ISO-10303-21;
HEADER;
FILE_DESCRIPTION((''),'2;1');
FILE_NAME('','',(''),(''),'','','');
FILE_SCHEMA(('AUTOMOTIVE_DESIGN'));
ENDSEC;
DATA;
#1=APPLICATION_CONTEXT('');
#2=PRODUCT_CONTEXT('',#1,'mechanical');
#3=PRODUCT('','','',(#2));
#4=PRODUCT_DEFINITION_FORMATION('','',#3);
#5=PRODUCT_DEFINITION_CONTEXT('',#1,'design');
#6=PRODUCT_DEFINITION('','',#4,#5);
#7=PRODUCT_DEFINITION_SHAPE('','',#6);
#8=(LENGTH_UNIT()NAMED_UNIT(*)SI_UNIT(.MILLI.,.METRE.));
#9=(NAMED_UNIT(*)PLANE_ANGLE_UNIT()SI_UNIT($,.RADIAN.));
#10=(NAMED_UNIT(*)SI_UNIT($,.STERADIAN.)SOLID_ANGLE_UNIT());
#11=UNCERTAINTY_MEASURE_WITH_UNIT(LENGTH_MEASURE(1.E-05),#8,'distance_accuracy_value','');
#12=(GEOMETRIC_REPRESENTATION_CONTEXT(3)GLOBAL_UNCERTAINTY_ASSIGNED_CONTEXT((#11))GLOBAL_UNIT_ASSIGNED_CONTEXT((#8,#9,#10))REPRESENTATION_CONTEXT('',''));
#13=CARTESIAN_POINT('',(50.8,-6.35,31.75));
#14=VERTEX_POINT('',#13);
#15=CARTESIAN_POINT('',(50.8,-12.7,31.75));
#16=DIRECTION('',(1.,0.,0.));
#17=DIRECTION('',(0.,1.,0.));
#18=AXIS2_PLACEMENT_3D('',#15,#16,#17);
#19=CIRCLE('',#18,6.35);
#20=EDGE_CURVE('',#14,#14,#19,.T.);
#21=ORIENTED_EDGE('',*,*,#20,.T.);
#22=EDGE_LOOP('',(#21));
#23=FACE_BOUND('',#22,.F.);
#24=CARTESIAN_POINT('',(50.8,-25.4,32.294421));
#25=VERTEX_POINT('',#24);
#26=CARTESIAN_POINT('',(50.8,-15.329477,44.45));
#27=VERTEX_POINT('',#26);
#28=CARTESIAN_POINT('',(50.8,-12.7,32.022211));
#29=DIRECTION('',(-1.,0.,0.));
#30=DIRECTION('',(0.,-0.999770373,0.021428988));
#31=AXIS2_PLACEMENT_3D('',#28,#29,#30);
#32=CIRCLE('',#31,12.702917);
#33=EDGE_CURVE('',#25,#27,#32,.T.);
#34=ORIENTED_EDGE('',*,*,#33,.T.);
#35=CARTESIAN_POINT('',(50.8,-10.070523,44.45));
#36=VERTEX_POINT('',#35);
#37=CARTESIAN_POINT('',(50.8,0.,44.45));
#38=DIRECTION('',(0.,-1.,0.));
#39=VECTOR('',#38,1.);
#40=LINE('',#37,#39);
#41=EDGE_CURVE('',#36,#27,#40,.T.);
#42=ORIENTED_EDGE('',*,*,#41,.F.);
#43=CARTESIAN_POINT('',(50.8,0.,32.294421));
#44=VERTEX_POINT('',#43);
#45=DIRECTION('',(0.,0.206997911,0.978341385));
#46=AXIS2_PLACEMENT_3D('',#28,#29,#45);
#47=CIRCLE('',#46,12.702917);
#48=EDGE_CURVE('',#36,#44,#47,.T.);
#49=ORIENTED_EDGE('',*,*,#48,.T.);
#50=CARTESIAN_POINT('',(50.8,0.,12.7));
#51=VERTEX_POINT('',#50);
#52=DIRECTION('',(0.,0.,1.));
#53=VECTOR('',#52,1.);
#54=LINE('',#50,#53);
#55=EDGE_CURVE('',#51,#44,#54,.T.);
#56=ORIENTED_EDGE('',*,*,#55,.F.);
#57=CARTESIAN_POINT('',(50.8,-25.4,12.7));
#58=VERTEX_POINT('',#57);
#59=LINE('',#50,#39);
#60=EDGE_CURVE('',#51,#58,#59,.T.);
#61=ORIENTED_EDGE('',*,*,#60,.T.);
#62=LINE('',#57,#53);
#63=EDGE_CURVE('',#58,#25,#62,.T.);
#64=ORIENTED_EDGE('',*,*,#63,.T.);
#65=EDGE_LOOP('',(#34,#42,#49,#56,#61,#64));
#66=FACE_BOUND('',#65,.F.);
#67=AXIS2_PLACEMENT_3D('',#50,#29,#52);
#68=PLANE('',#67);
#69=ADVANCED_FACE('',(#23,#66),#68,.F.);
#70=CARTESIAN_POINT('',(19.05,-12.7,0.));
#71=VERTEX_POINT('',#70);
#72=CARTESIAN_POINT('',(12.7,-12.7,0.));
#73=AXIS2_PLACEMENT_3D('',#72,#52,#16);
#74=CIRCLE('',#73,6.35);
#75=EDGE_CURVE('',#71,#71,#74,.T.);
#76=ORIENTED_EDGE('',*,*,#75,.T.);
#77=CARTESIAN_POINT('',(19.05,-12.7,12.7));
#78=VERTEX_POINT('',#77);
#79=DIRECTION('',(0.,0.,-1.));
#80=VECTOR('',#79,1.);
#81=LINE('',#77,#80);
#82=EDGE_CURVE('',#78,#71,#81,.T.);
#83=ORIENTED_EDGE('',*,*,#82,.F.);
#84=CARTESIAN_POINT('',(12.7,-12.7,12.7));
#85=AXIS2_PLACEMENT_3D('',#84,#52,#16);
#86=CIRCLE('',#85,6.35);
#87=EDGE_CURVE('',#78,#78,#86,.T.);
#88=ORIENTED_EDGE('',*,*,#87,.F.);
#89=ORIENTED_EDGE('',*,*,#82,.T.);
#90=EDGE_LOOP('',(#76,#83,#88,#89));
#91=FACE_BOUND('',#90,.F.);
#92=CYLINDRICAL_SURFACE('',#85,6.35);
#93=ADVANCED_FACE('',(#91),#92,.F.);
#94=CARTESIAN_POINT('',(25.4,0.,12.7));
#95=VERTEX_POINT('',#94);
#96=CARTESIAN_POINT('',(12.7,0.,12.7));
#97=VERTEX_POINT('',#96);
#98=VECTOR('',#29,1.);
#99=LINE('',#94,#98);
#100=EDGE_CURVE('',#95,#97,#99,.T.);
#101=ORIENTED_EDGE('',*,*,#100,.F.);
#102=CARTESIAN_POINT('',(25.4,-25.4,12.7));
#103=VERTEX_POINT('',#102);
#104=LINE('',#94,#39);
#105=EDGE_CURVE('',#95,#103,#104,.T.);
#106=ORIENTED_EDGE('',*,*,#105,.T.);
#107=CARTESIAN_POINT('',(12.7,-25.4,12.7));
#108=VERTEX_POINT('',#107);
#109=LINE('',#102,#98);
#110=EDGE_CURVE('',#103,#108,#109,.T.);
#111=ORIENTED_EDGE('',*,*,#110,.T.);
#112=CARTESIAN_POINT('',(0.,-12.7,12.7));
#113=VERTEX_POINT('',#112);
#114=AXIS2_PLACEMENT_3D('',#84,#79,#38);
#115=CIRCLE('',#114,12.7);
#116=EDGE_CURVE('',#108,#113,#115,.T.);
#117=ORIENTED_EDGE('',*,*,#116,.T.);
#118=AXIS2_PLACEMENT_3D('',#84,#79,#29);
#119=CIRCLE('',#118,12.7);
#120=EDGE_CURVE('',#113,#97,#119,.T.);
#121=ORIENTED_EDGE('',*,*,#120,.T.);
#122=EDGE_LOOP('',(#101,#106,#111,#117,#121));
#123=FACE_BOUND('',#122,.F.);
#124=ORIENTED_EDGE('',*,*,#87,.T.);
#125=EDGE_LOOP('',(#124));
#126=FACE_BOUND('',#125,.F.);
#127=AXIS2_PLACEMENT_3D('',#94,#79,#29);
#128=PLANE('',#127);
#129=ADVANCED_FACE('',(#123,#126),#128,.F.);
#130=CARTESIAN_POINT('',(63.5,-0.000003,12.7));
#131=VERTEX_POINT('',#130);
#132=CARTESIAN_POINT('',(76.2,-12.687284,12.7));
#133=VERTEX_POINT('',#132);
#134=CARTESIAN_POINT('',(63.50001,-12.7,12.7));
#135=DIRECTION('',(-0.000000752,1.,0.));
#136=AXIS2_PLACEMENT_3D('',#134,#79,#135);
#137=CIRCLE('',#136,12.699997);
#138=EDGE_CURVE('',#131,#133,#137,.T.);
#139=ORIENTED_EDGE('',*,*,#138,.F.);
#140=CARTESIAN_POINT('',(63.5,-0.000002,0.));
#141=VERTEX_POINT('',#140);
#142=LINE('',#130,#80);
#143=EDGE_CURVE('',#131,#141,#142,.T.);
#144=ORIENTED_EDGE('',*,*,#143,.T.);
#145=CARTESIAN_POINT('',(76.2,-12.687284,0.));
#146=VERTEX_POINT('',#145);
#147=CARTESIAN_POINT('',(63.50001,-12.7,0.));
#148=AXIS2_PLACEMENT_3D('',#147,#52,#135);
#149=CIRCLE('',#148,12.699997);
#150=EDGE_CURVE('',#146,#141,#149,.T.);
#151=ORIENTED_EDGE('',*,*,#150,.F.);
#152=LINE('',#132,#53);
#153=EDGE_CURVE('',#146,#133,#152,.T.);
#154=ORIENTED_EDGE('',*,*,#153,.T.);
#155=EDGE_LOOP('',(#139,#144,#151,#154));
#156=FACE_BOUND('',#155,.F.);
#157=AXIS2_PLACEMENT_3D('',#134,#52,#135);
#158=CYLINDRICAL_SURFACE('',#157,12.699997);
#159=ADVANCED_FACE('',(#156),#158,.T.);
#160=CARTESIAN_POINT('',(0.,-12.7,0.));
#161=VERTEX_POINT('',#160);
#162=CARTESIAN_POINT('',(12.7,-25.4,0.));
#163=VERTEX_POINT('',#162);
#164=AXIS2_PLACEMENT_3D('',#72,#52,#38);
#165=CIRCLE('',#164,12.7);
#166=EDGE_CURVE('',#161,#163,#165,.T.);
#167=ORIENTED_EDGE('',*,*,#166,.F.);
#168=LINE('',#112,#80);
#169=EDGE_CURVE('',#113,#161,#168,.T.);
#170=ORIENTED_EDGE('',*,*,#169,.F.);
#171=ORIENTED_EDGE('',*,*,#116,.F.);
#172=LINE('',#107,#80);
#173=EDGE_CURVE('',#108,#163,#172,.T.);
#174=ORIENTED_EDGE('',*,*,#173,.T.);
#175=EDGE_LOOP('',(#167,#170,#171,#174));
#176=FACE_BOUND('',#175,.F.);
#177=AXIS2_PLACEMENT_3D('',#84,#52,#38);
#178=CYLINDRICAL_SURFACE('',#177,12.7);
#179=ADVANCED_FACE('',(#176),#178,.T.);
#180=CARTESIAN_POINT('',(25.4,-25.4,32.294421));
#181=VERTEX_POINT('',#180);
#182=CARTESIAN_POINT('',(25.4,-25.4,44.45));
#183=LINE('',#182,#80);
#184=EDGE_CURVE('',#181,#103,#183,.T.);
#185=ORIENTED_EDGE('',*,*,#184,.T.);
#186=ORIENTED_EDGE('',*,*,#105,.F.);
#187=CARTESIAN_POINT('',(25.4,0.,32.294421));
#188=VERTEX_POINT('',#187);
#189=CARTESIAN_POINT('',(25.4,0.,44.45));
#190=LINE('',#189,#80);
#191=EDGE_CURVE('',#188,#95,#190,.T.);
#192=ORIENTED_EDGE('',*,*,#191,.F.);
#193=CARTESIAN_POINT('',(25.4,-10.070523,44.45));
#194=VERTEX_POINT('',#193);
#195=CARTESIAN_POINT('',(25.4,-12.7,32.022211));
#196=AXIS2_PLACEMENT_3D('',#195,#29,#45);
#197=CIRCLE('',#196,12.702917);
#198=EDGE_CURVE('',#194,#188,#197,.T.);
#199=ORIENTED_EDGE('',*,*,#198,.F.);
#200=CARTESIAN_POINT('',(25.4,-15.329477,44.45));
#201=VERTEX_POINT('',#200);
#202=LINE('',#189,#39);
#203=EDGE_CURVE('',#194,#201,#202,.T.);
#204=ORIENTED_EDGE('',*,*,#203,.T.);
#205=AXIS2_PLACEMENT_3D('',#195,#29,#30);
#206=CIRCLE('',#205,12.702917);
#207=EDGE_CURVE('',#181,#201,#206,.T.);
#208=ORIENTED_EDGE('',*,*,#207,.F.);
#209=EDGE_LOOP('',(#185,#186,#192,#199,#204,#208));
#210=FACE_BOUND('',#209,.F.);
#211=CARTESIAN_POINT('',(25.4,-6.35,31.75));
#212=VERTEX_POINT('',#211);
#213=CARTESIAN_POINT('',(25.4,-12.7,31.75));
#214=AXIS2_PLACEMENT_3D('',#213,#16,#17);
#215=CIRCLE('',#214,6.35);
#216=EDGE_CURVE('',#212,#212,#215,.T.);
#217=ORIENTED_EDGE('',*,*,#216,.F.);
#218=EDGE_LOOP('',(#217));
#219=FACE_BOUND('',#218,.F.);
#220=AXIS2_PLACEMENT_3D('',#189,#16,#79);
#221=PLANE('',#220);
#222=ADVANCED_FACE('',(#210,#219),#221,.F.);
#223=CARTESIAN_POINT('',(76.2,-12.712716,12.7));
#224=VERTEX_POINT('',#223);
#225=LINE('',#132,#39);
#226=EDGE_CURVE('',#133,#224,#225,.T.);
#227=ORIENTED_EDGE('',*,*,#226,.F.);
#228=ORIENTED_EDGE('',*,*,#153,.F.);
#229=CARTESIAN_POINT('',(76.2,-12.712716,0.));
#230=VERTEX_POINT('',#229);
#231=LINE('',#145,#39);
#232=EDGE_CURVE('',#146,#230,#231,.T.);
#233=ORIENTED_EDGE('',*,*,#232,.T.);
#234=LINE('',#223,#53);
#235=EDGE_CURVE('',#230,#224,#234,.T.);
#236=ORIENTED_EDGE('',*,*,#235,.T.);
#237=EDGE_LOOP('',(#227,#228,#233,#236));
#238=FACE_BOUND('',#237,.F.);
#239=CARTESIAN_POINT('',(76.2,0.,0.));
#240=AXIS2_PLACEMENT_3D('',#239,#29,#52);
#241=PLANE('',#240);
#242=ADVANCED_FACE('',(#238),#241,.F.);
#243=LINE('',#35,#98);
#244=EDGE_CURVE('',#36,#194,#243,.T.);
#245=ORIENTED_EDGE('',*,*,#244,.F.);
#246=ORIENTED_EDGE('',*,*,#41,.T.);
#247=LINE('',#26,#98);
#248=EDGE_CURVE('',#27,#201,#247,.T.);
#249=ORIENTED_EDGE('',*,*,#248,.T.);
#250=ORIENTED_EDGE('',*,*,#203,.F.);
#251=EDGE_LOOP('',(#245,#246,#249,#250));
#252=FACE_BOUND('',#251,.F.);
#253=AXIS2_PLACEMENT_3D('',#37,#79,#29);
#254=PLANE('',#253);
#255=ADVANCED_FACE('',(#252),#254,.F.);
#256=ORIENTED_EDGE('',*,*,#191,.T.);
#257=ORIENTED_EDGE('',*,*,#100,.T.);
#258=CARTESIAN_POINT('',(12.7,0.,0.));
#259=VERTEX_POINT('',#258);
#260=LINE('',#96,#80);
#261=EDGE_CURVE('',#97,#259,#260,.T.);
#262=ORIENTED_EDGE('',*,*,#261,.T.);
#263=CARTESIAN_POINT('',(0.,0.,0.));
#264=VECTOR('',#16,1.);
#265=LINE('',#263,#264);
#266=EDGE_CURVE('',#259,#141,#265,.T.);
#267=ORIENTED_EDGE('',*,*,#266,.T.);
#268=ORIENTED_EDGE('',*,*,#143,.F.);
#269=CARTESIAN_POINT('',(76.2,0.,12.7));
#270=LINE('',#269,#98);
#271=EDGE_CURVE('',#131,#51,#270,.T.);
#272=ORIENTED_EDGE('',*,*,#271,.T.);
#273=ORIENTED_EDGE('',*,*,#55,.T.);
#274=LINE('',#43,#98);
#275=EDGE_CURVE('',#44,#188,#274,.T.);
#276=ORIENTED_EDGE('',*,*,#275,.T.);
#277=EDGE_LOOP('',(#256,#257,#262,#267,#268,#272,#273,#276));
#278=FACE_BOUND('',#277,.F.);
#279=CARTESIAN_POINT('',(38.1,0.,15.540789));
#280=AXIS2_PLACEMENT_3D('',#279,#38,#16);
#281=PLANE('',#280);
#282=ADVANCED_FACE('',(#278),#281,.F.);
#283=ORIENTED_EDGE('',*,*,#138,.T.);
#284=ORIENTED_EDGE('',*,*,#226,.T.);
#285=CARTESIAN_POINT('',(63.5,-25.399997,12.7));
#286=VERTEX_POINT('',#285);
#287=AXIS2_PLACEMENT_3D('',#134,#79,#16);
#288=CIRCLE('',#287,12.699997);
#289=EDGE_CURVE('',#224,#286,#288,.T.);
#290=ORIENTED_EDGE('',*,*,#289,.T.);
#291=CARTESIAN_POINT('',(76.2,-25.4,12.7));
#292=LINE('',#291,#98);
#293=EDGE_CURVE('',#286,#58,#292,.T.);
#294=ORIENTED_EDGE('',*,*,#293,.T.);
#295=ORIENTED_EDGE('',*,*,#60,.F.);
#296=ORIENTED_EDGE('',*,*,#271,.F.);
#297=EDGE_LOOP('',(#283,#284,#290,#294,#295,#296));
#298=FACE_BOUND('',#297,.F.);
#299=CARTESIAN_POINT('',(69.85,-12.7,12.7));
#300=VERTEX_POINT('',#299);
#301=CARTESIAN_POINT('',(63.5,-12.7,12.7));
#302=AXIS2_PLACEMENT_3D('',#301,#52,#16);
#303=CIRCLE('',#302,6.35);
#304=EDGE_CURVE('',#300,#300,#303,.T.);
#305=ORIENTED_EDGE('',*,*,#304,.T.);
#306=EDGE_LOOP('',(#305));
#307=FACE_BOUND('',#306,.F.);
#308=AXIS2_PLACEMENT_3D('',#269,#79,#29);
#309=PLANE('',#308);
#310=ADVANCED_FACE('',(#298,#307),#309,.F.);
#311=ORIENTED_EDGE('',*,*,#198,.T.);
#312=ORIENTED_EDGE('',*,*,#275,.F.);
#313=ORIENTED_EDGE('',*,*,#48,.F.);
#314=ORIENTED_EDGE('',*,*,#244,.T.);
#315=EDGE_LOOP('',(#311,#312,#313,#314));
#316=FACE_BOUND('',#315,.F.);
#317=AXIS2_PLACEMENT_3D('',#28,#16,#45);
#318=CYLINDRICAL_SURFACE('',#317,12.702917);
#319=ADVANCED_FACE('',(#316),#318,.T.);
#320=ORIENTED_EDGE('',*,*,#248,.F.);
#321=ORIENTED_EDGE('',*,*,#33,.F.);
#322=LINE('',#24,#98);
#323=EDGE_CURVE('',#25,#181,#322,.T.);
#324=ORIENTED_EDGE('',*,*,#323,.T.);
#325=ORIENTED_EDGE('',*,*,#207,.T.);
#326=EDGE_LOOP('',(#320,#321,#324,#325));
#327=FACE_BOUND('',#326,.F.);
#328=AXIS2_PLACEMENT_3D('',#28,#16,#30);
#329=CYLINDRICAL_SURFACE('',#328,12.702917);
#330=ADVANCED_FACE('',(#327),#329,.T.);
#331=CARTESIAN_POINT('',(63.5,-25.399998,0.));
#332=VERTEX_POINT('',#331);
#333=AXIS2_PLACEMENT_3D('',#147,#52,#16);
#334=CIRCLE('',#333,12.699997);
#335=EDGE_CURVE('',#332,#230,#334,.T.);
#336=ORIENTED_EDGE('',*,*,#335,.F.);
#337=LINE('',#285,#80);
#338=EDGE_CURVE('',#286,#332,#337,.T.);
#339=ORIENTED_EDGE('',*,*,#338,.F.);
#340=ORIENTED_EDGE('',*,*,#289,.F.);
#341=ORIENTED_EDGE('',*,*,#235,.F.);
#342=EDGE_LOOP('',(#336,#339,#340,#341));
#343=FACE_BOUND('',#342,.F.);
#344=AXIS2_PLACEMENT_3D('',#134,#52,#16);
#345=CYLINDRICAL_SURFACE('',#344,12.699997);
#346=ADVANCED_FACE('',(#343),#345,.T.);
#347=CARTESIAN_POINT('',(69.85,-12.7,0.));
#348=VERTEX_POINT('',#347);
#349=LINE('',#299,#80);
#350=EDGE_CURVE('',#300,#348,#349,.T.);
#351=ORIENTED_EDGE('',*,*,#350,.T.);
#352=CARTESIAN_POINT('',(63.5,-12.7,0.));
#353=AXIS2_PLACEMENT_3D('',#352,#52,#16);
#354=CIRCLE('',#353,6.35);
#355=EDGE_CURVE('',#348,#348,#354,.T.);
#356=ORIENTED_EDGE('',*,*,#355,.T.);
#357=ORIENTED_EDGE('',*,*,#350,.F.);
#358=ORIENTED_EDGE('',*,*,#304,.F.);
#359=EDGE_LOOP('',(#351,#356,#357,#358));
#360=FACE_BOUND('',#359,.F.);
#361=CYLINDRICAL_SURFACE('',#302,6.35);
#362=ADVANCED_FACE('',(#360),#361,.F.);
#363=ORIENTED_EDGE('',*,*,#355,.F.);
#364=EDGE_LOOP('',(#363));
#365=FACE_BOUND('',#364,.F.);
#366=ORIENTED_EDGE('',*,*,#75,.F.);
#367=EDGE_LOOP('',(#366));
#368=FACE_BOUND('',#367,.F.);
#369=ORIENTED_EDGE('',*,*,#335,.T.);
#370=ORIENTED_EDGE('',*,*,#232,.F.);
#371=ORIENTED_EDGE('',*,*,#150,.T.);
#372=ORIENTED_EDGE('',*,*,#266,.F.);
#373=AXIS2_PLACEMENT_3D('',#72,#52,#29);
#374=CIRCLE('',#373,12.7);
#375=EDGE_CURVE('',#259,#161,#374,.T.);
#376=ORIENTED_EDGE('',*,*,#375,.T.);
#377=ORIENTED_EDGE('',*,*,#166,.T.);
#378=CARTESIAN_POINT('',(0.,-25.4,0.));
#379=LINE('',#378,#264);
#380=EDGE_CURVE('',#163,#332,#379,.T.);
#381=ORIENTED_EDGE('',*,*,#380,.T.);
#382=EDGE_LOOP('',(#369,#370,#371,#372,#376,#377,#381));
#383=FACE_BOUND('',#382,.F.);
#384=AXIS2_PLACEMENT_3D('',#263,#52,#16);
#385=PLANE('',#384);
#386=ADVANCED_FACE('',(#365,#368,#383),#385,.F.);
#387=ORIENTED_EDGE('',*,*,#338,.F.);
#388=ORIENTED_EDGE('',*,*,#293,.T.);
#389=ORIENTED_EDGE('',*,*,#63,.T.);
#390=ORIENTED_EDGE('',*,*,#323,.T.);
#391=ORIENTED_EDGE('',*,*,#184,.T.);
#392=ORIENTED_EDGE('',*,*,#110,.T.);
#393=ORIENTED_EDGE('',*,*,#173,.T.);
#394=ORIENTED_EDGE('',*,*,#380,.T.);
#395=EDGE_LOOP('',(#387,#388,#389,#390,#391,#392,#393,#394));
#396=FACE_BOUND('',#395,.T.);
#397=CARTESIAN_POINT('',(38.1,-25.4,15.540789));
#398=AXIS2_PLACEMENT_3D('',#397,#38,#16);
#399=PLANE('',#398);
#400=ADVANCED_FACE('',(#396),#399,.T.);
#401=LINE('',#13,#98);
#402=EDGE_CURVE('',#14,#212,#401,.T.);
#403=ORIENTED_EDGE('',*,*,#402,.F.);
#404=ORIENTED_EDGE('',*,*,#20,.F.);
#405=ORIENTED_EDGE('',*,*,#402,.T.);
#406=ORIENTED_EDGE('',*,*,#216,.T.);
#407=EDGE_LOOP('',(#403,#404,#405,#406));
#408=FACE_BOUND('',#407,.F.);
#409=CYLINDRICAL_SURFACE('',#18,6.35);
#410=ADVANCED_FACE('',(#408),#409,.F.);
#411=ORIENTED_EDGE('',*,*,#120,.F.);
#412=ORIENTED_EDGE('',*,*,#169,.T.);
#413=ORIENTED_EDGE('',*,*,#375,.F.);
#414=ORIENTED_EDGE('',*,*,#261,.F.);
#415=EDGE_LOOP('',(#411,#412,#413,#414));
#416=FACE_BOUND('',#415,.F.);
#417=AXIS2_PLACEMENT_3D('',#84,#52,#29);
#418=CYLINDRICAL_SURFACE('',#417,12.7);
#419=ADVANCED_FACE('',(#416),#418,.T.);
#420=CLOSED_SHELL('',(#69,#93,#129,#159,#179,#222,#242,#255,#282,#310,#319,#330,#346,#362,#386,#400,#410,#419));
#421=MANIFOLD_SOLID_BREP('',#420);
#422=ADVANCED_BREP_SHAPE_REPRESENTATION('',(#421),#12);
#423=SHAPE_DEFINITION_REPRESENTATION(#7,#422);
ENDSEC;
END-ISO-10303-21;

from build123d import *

# Parameters (mm, degrees)
F1_DEPTH = 25.4
F2_R     = 6.35
F3_DEPTH = 25.4
F4_R     = 6.35
F5_DEPTH = 25.4
F6_R     = 6.35
F7_DEPTH = 25.4


# Not quite as in the source:
# - ends of sketch curves that miss each other by under 0.0002 mm in the source are joined


with BuildPart() as f1:
    # F0 (on Front) → F1 (new body)
    with BuildSketch(Plane.XZ):
        Polygon((0, 12.7), (0, 0), (76.2, 0), (76.2, 12.7), (50.8, 12.7), (50.8, 44.45), (25.4, 44.45), (25.4, 12.7), align=None)
    extrude(amount=F1_DEPTH)

    # F2 (on face) → F3 (cut)
    with BuildSketch(Plane.YZ.offset(50.8)):
        with BuildLine():
            ThreePointArc((-25.4, 32.294421317), (-22.4820111245, 40.1263057346), (-15.3294772723, 44.45))
            Line((-15.3294772723, 44.45), (-25.4, 44.45))
            Line((-25.4, 44.45), (-25.4, 32.294421317))
        make_face()
        with BuildLine():
            ThreePointArc((-10.0705227277, 44.45), (-2.9179888755, 40.1263057346), (0, 32.294421317))
            Line((0, 32.294421317), (0, 44.45))
            Line((0, 44.45), (-10.0705227277, 44.45))
        make_face()
        with Locations((-12.7, 31.75)):
            Circle(F2_R)
    extrude(amount=-F3_DEPTH, mode=Mode.SUBTRACT)

    # F4 (on face) → F5 (cut)
    with BuildSketch(Plane.XY.offset(12.7)):
        with BuildLine():
            ThreePointArc((63.5, -3.1832e-06), (72.4802600435, -3.7197427535), (76.2000063664, -12.7))
            Line((76.2000063664, -12.7), (76.2, 0))
            Line((76.2, 0), (63.5, -3.1832e-06))
        make_face()
        with BuildLine():
            ThreePointArc((76.2000063664, -12.7), (72.4802600435, -21.6802572465), (63.5, -25.3999968168))
            Line((63.5, -25.3999968168), (76.2, -25.4))
            Line((76.2, -25.4), (76.2000063664, -12.7))
        make_face()
        with Locations((63.5, -12.7)):
            Circle(F4_R)
    extrude(amount=-F5_DEPTH, mode=Mode.SUBTRACT)

    # F6 (on face) → F7 (cut)
    with BuildSketch(Plane.XY.offset(12.7)):
        with Locations((12.7, -12.7)):
            Circle(F6_R)
        with BuildLine():
            ThreePointArc((0, -12.7), (3.7197438789, -3.7197438789), (12.7, 0))
            Line((12.7, 0), (0, 0))
            Line((0, 0), (0, -12.7))
        make_face()
        with BuildLine():
            ThreePointArc((12.7, -25.4), (3.7197438789, -21.6802561211), (0, -12.7))
            Line((0, -12.7), (0, -25.4))
            Line((0, -25.4), (12.7, -25.4))
        make_face()
    extrude(amount=-F7_DEPTH, mode=Mode.SUBTRACT)


solid = f1.part
